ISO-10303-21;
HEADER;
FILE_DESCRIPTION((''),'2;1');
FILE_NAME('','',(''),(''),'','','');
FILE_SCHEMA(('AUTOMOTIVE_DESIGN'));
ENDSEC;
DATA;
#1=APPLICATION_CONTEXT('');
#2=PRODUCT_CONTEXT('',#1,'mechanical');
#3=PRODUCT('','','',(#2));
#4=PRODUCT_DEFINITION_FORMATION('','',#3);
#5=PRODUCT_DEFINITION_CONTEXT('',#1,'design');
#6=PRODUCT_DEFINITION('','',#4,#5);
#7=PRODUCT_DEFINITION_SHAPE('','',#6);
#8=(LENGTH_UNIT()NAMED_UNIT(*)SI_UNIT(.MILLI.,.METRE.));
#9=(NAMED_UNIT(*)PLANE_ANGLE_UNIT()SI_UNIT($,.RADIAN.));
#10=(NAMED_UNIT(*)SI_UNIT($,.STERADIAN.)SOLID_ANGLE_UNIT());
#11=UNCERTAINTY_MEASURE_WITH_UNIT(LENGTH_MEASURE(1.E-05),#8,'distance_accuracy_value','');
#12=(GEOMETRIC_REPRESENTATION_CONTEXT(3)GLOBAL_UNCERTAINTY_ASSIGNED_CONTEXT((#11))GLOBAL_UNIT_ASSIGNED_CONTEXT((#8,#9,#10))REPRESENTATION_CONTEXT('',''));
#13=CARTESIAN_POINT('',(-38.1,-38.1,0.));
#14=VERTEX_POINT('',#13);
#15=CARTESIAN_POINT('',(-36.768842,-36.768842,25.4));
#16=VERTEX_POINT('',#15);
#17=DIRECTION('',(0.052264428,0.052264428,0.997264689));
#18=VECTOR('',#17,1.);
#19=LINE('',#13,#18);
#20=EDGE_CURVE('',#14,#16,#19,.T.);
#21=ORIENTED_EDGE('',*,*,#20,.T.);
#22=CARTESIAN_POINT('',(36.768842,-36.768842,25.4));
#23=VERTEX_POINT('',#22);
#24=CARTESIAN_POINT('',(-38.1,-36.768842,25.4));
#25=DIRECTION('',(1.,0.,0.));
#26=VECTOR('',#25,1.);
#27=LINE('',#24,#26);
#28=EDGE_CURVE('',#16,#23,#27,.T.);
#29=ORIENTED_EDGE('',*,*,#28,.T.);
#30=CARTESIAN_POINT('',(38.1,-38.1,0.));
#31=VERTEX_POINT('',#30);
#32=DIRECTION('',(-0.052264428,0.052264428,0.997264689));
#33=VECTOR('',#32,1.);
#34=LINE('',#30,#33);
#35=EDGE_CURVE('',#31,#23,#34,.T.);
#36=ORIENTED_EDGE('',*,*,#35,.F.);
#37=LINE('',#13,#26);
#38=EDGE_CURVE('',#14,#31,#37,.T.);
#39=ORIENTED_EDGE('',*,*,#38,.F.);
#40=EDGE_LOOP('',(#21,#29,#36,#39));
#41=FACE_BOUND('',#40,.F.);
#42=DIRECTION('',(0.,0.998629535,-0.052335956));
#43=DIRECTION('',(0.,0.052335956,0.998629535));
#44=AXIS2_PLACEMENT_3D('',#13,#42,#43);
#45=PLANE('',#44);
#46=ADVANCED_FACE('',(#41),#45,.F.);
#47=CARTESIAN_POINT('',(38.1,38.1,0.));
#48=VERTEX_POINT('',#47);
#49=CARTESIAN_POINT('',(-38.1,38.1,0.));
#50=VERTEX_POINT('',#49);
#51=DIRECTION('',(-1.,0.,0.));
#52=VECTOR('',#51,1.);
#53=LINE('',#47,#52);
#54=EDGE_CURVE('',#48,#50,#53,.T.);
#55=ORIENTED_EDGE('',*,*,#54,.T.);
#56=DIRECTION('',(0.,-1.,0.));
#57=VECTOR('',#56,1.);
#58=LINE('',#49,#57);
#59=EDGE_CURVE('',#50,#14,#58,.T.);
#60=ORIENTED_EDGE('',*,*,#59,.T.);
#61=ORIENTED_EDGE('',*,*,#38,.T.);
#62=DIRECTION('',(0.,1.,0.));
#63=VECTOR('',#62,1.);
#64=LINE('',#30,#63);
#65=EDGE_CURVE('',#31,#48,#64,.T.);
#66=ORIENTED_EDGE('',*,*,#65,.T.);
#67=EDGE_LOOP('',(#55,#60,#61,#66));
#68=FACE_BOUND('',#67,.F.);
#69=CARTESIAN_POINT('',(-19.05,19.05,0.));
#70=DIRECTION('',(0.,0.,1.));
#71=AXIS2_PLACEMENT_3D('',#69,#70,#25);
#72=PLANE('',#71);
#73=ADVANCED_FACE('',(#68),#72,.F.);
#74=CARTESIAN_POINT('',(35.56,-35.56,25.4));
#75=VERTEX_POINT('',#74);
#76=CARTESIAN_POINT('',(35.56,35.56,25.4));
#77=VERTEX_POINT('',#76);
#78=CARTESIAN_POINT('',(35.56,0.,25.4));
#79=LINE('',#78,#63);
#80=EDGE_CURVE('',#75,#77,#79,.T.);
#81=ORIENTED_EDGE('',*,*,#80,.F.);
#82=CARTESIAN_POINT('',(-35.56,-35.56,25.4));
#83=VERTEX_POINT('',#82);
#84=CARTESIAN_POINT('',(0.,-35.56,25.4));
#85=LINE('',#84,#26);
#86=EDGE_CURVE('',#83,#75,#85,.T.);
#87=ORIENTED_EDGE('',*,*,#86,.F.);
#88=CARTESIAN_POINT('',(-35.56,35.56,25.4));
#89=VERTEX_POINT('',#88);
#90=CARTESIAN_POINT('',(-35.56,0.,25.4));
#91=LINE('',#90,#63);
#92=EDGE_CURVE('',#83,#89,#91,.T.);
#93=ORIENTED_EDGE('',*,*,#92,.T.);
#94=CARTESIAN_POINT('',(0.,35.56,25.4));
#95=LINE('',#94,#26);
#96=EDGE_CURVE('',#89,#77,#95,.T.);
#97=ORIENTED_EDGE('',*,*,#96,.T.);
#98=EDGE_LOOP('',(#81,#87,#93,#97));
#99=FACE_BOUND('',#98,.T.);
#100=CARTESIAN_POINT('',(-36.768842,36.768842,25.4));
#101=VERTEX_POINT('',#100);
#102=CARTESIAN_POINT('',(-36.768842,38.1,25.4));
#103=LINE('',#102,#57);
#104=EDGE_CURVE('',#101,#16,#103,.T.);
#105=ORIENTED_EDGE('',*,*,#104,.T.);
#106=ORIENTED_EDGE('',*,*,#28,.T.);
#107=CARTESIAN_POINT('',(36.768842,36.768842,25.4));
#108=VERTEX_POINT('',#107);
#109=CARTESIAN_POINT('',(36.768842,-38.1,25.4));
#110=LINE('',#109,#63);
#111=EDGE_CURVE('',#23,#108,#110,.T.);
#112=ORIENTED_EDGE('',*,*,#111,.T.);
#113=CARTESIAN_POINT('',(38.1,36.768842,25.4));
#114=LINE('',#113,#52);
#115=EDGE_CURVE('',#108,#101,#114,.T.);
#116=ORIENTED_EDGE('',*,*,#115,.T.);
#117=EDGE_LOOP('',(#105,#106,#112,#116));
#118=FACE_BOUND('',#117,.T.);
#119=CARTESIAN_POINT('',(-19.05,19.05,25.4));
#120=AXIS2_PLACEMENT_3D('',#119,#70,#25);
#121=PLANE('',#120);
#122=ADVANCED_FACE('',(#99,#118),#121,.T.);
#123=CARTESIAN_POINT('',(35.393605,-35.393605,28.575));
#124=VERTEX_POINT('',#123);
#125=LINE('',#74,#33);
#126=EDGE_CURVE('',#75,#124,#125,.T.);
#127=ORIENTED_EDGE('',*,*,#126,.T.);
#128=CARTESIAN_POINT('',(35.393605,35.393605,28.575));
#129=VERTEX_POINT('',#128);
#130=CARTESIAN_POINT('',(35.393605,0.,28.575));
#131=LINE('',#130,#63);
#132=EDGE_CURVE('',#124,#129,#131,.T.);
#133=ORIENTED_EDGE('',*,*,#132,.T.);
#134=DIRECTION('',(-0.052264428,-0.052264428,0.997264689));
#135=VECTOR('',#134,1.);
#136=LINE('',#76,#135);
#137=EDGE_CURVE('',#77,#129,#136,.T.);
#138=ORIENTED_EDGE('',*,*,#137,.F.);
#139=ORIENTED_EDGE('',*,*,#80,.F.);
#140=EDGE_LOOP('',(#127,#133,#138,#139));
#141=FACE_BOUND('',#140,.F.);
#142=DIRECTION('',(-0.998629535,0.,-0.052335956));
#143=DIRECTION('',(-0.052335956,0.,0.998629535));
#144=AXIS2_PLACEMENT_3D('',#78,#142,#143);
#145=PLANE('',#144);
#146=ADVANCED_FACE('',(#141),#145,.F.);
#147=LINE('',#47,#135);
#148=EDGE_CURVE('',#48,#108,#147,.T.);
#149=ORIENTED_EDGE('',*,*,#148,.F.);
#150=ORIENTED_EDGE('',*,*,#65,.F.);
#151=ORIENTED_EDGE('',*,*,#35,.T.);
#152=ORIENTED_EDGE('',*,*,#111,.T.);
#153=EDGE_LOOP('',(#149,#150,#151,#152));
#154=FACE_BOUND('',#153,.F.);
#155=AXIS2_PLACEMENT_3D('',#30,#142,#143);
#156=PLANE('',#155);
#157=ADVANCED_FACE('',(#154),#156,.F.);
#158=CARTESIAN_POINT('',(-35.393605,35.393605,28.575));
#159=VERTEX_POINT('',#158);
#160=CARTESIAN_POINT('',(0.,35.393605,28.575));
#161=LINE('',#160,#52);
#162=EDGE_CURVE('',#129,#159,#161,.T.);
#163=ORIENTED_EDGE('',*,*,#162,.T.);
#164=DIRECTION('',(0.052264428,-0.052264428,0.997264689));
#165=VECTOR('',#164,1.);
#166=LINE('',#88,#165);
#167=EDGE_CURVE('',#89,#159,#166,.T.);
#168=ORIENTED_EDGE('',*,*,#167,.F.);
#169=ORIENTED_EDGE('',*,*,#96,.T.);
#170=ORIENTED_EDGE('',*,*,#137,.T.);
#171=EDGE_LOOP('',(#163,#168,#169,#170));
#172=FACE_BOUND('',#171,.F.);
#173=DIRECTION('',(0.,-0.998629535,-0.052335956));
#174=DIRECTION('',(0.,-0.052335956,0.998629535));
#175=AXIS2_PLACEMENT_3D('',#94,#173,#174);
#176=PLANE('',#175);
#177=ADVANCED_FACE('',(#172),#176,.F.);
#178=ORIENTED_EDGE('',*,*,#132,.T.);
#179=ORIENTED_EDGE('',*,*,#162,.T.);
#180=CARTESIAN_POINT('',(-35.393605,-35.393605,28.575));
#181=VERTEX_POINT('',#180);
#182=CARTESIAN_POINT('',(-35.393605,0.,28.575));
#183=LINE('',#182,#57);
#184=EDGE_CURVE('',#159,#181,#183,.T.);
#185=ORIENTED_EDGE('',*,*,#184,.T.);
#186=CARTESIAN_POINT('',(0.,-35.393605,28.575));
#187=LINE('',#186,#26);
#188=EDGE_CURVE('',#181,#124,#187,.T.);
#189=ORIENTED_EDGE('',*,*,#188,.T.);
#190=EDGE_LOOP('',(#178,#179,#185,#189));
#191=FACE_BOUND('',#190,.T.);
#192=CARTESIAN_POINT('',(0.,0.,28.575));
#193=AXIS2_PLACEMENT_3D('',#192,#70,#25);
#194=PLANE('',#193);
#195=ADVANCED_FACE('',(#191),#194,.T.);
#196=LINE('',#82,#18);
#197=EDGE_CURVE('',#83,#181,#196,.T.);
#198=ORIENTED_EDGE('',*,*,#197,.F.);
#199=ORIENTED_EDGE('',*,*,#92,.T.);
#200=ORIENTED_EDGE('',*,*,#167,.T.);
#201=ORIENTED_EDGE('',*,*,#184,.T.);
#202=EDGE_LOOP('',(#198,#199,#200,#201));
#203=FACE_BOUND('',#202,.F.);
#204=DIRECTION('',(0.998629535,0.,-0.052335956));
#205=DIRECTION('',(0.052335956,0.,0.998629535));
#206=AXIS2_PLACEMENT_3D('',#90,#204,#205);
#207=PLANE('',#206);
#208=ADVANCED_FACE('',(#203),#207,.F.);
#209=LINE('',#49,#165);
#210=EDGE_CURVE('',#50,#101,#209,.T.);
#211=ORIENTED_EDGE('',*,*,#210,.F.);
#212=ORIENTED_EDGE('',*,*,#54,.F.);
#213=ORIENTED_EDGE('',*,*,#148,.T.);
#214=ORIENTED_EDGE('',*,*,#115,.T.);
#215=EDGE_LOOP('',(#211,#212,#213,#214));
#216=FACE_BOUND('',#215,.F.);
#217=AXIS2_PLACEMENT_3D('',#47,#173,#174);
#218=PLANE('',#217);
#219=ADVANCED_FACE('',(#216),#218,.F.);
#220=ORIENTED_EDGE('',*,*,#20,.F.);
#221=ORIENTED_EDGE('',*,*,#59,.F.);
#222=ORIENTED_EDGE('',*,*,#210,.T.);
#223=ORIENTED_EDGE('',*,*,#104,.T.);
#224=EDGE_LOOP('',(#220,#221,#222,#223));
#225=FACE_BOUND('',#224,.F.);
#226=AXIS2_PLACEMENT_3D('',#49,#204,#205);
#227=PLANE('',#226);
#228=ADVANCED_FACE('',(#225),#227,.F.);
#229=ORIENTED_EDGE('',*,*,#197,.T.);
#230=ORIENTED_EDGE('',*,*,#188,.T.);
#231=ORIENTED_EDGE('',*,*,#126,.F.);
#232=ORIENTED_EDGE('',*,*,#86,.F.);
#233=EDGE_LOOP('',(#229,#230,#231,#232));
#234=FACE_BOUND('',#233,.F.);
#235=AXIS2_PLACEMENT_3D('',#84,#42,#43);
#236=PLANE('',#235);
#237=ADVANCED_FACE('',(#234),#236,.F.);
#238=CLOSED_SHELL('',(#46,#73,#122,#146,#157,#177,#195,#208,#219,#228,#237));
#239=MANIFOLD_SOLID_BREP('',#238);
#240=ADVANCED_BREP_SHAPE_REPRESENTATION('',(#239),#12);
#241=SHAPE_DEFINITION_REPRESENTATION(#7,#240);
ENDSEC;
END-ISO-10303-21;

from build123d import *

# Parameters (mm, degrees)
F0_W     = 38.1
F0_H     = 38.1
F1_DEPTH = 25.4
F1_TAPER = 3
F2_W     = 71.12
F2_H     = 71.12
F3_DEPTH = 3.175
F3_TAPER = 3


# Not quite as in the source:
# - a feature of the source that left no trace in its solid (it failed there, or was rolled back) is left out


with BuildPart() as f1:
    # F0 (on Top) → F1 (new body)
    with BuildSketch(Plane.XY):
        with Locations((-19.05, 19.05)):
            Rectangle(F0_W, F0_H)
        with Locations((19.05, 19.05)):
            Rectangle(F0_W, F0_H)
        with Locations((-19.05, -19.05)):
            Rectangle(F0_W, F0_H)
        with Locations((19.05, -19.05)):
            Rectangle(F0_W, F0_H)
    extrude(amount=F1_DEPTH, taper=F1_TAPER)

    # F2 (on face) → F3 (join)
    with BuildSketch(Plane.XY.offset(25.4)):
        Rectangle(F2_W, F2_H)
    extrude(amount=F3_DEPTH, taper=F3_TAPER)


solid = f1.part
